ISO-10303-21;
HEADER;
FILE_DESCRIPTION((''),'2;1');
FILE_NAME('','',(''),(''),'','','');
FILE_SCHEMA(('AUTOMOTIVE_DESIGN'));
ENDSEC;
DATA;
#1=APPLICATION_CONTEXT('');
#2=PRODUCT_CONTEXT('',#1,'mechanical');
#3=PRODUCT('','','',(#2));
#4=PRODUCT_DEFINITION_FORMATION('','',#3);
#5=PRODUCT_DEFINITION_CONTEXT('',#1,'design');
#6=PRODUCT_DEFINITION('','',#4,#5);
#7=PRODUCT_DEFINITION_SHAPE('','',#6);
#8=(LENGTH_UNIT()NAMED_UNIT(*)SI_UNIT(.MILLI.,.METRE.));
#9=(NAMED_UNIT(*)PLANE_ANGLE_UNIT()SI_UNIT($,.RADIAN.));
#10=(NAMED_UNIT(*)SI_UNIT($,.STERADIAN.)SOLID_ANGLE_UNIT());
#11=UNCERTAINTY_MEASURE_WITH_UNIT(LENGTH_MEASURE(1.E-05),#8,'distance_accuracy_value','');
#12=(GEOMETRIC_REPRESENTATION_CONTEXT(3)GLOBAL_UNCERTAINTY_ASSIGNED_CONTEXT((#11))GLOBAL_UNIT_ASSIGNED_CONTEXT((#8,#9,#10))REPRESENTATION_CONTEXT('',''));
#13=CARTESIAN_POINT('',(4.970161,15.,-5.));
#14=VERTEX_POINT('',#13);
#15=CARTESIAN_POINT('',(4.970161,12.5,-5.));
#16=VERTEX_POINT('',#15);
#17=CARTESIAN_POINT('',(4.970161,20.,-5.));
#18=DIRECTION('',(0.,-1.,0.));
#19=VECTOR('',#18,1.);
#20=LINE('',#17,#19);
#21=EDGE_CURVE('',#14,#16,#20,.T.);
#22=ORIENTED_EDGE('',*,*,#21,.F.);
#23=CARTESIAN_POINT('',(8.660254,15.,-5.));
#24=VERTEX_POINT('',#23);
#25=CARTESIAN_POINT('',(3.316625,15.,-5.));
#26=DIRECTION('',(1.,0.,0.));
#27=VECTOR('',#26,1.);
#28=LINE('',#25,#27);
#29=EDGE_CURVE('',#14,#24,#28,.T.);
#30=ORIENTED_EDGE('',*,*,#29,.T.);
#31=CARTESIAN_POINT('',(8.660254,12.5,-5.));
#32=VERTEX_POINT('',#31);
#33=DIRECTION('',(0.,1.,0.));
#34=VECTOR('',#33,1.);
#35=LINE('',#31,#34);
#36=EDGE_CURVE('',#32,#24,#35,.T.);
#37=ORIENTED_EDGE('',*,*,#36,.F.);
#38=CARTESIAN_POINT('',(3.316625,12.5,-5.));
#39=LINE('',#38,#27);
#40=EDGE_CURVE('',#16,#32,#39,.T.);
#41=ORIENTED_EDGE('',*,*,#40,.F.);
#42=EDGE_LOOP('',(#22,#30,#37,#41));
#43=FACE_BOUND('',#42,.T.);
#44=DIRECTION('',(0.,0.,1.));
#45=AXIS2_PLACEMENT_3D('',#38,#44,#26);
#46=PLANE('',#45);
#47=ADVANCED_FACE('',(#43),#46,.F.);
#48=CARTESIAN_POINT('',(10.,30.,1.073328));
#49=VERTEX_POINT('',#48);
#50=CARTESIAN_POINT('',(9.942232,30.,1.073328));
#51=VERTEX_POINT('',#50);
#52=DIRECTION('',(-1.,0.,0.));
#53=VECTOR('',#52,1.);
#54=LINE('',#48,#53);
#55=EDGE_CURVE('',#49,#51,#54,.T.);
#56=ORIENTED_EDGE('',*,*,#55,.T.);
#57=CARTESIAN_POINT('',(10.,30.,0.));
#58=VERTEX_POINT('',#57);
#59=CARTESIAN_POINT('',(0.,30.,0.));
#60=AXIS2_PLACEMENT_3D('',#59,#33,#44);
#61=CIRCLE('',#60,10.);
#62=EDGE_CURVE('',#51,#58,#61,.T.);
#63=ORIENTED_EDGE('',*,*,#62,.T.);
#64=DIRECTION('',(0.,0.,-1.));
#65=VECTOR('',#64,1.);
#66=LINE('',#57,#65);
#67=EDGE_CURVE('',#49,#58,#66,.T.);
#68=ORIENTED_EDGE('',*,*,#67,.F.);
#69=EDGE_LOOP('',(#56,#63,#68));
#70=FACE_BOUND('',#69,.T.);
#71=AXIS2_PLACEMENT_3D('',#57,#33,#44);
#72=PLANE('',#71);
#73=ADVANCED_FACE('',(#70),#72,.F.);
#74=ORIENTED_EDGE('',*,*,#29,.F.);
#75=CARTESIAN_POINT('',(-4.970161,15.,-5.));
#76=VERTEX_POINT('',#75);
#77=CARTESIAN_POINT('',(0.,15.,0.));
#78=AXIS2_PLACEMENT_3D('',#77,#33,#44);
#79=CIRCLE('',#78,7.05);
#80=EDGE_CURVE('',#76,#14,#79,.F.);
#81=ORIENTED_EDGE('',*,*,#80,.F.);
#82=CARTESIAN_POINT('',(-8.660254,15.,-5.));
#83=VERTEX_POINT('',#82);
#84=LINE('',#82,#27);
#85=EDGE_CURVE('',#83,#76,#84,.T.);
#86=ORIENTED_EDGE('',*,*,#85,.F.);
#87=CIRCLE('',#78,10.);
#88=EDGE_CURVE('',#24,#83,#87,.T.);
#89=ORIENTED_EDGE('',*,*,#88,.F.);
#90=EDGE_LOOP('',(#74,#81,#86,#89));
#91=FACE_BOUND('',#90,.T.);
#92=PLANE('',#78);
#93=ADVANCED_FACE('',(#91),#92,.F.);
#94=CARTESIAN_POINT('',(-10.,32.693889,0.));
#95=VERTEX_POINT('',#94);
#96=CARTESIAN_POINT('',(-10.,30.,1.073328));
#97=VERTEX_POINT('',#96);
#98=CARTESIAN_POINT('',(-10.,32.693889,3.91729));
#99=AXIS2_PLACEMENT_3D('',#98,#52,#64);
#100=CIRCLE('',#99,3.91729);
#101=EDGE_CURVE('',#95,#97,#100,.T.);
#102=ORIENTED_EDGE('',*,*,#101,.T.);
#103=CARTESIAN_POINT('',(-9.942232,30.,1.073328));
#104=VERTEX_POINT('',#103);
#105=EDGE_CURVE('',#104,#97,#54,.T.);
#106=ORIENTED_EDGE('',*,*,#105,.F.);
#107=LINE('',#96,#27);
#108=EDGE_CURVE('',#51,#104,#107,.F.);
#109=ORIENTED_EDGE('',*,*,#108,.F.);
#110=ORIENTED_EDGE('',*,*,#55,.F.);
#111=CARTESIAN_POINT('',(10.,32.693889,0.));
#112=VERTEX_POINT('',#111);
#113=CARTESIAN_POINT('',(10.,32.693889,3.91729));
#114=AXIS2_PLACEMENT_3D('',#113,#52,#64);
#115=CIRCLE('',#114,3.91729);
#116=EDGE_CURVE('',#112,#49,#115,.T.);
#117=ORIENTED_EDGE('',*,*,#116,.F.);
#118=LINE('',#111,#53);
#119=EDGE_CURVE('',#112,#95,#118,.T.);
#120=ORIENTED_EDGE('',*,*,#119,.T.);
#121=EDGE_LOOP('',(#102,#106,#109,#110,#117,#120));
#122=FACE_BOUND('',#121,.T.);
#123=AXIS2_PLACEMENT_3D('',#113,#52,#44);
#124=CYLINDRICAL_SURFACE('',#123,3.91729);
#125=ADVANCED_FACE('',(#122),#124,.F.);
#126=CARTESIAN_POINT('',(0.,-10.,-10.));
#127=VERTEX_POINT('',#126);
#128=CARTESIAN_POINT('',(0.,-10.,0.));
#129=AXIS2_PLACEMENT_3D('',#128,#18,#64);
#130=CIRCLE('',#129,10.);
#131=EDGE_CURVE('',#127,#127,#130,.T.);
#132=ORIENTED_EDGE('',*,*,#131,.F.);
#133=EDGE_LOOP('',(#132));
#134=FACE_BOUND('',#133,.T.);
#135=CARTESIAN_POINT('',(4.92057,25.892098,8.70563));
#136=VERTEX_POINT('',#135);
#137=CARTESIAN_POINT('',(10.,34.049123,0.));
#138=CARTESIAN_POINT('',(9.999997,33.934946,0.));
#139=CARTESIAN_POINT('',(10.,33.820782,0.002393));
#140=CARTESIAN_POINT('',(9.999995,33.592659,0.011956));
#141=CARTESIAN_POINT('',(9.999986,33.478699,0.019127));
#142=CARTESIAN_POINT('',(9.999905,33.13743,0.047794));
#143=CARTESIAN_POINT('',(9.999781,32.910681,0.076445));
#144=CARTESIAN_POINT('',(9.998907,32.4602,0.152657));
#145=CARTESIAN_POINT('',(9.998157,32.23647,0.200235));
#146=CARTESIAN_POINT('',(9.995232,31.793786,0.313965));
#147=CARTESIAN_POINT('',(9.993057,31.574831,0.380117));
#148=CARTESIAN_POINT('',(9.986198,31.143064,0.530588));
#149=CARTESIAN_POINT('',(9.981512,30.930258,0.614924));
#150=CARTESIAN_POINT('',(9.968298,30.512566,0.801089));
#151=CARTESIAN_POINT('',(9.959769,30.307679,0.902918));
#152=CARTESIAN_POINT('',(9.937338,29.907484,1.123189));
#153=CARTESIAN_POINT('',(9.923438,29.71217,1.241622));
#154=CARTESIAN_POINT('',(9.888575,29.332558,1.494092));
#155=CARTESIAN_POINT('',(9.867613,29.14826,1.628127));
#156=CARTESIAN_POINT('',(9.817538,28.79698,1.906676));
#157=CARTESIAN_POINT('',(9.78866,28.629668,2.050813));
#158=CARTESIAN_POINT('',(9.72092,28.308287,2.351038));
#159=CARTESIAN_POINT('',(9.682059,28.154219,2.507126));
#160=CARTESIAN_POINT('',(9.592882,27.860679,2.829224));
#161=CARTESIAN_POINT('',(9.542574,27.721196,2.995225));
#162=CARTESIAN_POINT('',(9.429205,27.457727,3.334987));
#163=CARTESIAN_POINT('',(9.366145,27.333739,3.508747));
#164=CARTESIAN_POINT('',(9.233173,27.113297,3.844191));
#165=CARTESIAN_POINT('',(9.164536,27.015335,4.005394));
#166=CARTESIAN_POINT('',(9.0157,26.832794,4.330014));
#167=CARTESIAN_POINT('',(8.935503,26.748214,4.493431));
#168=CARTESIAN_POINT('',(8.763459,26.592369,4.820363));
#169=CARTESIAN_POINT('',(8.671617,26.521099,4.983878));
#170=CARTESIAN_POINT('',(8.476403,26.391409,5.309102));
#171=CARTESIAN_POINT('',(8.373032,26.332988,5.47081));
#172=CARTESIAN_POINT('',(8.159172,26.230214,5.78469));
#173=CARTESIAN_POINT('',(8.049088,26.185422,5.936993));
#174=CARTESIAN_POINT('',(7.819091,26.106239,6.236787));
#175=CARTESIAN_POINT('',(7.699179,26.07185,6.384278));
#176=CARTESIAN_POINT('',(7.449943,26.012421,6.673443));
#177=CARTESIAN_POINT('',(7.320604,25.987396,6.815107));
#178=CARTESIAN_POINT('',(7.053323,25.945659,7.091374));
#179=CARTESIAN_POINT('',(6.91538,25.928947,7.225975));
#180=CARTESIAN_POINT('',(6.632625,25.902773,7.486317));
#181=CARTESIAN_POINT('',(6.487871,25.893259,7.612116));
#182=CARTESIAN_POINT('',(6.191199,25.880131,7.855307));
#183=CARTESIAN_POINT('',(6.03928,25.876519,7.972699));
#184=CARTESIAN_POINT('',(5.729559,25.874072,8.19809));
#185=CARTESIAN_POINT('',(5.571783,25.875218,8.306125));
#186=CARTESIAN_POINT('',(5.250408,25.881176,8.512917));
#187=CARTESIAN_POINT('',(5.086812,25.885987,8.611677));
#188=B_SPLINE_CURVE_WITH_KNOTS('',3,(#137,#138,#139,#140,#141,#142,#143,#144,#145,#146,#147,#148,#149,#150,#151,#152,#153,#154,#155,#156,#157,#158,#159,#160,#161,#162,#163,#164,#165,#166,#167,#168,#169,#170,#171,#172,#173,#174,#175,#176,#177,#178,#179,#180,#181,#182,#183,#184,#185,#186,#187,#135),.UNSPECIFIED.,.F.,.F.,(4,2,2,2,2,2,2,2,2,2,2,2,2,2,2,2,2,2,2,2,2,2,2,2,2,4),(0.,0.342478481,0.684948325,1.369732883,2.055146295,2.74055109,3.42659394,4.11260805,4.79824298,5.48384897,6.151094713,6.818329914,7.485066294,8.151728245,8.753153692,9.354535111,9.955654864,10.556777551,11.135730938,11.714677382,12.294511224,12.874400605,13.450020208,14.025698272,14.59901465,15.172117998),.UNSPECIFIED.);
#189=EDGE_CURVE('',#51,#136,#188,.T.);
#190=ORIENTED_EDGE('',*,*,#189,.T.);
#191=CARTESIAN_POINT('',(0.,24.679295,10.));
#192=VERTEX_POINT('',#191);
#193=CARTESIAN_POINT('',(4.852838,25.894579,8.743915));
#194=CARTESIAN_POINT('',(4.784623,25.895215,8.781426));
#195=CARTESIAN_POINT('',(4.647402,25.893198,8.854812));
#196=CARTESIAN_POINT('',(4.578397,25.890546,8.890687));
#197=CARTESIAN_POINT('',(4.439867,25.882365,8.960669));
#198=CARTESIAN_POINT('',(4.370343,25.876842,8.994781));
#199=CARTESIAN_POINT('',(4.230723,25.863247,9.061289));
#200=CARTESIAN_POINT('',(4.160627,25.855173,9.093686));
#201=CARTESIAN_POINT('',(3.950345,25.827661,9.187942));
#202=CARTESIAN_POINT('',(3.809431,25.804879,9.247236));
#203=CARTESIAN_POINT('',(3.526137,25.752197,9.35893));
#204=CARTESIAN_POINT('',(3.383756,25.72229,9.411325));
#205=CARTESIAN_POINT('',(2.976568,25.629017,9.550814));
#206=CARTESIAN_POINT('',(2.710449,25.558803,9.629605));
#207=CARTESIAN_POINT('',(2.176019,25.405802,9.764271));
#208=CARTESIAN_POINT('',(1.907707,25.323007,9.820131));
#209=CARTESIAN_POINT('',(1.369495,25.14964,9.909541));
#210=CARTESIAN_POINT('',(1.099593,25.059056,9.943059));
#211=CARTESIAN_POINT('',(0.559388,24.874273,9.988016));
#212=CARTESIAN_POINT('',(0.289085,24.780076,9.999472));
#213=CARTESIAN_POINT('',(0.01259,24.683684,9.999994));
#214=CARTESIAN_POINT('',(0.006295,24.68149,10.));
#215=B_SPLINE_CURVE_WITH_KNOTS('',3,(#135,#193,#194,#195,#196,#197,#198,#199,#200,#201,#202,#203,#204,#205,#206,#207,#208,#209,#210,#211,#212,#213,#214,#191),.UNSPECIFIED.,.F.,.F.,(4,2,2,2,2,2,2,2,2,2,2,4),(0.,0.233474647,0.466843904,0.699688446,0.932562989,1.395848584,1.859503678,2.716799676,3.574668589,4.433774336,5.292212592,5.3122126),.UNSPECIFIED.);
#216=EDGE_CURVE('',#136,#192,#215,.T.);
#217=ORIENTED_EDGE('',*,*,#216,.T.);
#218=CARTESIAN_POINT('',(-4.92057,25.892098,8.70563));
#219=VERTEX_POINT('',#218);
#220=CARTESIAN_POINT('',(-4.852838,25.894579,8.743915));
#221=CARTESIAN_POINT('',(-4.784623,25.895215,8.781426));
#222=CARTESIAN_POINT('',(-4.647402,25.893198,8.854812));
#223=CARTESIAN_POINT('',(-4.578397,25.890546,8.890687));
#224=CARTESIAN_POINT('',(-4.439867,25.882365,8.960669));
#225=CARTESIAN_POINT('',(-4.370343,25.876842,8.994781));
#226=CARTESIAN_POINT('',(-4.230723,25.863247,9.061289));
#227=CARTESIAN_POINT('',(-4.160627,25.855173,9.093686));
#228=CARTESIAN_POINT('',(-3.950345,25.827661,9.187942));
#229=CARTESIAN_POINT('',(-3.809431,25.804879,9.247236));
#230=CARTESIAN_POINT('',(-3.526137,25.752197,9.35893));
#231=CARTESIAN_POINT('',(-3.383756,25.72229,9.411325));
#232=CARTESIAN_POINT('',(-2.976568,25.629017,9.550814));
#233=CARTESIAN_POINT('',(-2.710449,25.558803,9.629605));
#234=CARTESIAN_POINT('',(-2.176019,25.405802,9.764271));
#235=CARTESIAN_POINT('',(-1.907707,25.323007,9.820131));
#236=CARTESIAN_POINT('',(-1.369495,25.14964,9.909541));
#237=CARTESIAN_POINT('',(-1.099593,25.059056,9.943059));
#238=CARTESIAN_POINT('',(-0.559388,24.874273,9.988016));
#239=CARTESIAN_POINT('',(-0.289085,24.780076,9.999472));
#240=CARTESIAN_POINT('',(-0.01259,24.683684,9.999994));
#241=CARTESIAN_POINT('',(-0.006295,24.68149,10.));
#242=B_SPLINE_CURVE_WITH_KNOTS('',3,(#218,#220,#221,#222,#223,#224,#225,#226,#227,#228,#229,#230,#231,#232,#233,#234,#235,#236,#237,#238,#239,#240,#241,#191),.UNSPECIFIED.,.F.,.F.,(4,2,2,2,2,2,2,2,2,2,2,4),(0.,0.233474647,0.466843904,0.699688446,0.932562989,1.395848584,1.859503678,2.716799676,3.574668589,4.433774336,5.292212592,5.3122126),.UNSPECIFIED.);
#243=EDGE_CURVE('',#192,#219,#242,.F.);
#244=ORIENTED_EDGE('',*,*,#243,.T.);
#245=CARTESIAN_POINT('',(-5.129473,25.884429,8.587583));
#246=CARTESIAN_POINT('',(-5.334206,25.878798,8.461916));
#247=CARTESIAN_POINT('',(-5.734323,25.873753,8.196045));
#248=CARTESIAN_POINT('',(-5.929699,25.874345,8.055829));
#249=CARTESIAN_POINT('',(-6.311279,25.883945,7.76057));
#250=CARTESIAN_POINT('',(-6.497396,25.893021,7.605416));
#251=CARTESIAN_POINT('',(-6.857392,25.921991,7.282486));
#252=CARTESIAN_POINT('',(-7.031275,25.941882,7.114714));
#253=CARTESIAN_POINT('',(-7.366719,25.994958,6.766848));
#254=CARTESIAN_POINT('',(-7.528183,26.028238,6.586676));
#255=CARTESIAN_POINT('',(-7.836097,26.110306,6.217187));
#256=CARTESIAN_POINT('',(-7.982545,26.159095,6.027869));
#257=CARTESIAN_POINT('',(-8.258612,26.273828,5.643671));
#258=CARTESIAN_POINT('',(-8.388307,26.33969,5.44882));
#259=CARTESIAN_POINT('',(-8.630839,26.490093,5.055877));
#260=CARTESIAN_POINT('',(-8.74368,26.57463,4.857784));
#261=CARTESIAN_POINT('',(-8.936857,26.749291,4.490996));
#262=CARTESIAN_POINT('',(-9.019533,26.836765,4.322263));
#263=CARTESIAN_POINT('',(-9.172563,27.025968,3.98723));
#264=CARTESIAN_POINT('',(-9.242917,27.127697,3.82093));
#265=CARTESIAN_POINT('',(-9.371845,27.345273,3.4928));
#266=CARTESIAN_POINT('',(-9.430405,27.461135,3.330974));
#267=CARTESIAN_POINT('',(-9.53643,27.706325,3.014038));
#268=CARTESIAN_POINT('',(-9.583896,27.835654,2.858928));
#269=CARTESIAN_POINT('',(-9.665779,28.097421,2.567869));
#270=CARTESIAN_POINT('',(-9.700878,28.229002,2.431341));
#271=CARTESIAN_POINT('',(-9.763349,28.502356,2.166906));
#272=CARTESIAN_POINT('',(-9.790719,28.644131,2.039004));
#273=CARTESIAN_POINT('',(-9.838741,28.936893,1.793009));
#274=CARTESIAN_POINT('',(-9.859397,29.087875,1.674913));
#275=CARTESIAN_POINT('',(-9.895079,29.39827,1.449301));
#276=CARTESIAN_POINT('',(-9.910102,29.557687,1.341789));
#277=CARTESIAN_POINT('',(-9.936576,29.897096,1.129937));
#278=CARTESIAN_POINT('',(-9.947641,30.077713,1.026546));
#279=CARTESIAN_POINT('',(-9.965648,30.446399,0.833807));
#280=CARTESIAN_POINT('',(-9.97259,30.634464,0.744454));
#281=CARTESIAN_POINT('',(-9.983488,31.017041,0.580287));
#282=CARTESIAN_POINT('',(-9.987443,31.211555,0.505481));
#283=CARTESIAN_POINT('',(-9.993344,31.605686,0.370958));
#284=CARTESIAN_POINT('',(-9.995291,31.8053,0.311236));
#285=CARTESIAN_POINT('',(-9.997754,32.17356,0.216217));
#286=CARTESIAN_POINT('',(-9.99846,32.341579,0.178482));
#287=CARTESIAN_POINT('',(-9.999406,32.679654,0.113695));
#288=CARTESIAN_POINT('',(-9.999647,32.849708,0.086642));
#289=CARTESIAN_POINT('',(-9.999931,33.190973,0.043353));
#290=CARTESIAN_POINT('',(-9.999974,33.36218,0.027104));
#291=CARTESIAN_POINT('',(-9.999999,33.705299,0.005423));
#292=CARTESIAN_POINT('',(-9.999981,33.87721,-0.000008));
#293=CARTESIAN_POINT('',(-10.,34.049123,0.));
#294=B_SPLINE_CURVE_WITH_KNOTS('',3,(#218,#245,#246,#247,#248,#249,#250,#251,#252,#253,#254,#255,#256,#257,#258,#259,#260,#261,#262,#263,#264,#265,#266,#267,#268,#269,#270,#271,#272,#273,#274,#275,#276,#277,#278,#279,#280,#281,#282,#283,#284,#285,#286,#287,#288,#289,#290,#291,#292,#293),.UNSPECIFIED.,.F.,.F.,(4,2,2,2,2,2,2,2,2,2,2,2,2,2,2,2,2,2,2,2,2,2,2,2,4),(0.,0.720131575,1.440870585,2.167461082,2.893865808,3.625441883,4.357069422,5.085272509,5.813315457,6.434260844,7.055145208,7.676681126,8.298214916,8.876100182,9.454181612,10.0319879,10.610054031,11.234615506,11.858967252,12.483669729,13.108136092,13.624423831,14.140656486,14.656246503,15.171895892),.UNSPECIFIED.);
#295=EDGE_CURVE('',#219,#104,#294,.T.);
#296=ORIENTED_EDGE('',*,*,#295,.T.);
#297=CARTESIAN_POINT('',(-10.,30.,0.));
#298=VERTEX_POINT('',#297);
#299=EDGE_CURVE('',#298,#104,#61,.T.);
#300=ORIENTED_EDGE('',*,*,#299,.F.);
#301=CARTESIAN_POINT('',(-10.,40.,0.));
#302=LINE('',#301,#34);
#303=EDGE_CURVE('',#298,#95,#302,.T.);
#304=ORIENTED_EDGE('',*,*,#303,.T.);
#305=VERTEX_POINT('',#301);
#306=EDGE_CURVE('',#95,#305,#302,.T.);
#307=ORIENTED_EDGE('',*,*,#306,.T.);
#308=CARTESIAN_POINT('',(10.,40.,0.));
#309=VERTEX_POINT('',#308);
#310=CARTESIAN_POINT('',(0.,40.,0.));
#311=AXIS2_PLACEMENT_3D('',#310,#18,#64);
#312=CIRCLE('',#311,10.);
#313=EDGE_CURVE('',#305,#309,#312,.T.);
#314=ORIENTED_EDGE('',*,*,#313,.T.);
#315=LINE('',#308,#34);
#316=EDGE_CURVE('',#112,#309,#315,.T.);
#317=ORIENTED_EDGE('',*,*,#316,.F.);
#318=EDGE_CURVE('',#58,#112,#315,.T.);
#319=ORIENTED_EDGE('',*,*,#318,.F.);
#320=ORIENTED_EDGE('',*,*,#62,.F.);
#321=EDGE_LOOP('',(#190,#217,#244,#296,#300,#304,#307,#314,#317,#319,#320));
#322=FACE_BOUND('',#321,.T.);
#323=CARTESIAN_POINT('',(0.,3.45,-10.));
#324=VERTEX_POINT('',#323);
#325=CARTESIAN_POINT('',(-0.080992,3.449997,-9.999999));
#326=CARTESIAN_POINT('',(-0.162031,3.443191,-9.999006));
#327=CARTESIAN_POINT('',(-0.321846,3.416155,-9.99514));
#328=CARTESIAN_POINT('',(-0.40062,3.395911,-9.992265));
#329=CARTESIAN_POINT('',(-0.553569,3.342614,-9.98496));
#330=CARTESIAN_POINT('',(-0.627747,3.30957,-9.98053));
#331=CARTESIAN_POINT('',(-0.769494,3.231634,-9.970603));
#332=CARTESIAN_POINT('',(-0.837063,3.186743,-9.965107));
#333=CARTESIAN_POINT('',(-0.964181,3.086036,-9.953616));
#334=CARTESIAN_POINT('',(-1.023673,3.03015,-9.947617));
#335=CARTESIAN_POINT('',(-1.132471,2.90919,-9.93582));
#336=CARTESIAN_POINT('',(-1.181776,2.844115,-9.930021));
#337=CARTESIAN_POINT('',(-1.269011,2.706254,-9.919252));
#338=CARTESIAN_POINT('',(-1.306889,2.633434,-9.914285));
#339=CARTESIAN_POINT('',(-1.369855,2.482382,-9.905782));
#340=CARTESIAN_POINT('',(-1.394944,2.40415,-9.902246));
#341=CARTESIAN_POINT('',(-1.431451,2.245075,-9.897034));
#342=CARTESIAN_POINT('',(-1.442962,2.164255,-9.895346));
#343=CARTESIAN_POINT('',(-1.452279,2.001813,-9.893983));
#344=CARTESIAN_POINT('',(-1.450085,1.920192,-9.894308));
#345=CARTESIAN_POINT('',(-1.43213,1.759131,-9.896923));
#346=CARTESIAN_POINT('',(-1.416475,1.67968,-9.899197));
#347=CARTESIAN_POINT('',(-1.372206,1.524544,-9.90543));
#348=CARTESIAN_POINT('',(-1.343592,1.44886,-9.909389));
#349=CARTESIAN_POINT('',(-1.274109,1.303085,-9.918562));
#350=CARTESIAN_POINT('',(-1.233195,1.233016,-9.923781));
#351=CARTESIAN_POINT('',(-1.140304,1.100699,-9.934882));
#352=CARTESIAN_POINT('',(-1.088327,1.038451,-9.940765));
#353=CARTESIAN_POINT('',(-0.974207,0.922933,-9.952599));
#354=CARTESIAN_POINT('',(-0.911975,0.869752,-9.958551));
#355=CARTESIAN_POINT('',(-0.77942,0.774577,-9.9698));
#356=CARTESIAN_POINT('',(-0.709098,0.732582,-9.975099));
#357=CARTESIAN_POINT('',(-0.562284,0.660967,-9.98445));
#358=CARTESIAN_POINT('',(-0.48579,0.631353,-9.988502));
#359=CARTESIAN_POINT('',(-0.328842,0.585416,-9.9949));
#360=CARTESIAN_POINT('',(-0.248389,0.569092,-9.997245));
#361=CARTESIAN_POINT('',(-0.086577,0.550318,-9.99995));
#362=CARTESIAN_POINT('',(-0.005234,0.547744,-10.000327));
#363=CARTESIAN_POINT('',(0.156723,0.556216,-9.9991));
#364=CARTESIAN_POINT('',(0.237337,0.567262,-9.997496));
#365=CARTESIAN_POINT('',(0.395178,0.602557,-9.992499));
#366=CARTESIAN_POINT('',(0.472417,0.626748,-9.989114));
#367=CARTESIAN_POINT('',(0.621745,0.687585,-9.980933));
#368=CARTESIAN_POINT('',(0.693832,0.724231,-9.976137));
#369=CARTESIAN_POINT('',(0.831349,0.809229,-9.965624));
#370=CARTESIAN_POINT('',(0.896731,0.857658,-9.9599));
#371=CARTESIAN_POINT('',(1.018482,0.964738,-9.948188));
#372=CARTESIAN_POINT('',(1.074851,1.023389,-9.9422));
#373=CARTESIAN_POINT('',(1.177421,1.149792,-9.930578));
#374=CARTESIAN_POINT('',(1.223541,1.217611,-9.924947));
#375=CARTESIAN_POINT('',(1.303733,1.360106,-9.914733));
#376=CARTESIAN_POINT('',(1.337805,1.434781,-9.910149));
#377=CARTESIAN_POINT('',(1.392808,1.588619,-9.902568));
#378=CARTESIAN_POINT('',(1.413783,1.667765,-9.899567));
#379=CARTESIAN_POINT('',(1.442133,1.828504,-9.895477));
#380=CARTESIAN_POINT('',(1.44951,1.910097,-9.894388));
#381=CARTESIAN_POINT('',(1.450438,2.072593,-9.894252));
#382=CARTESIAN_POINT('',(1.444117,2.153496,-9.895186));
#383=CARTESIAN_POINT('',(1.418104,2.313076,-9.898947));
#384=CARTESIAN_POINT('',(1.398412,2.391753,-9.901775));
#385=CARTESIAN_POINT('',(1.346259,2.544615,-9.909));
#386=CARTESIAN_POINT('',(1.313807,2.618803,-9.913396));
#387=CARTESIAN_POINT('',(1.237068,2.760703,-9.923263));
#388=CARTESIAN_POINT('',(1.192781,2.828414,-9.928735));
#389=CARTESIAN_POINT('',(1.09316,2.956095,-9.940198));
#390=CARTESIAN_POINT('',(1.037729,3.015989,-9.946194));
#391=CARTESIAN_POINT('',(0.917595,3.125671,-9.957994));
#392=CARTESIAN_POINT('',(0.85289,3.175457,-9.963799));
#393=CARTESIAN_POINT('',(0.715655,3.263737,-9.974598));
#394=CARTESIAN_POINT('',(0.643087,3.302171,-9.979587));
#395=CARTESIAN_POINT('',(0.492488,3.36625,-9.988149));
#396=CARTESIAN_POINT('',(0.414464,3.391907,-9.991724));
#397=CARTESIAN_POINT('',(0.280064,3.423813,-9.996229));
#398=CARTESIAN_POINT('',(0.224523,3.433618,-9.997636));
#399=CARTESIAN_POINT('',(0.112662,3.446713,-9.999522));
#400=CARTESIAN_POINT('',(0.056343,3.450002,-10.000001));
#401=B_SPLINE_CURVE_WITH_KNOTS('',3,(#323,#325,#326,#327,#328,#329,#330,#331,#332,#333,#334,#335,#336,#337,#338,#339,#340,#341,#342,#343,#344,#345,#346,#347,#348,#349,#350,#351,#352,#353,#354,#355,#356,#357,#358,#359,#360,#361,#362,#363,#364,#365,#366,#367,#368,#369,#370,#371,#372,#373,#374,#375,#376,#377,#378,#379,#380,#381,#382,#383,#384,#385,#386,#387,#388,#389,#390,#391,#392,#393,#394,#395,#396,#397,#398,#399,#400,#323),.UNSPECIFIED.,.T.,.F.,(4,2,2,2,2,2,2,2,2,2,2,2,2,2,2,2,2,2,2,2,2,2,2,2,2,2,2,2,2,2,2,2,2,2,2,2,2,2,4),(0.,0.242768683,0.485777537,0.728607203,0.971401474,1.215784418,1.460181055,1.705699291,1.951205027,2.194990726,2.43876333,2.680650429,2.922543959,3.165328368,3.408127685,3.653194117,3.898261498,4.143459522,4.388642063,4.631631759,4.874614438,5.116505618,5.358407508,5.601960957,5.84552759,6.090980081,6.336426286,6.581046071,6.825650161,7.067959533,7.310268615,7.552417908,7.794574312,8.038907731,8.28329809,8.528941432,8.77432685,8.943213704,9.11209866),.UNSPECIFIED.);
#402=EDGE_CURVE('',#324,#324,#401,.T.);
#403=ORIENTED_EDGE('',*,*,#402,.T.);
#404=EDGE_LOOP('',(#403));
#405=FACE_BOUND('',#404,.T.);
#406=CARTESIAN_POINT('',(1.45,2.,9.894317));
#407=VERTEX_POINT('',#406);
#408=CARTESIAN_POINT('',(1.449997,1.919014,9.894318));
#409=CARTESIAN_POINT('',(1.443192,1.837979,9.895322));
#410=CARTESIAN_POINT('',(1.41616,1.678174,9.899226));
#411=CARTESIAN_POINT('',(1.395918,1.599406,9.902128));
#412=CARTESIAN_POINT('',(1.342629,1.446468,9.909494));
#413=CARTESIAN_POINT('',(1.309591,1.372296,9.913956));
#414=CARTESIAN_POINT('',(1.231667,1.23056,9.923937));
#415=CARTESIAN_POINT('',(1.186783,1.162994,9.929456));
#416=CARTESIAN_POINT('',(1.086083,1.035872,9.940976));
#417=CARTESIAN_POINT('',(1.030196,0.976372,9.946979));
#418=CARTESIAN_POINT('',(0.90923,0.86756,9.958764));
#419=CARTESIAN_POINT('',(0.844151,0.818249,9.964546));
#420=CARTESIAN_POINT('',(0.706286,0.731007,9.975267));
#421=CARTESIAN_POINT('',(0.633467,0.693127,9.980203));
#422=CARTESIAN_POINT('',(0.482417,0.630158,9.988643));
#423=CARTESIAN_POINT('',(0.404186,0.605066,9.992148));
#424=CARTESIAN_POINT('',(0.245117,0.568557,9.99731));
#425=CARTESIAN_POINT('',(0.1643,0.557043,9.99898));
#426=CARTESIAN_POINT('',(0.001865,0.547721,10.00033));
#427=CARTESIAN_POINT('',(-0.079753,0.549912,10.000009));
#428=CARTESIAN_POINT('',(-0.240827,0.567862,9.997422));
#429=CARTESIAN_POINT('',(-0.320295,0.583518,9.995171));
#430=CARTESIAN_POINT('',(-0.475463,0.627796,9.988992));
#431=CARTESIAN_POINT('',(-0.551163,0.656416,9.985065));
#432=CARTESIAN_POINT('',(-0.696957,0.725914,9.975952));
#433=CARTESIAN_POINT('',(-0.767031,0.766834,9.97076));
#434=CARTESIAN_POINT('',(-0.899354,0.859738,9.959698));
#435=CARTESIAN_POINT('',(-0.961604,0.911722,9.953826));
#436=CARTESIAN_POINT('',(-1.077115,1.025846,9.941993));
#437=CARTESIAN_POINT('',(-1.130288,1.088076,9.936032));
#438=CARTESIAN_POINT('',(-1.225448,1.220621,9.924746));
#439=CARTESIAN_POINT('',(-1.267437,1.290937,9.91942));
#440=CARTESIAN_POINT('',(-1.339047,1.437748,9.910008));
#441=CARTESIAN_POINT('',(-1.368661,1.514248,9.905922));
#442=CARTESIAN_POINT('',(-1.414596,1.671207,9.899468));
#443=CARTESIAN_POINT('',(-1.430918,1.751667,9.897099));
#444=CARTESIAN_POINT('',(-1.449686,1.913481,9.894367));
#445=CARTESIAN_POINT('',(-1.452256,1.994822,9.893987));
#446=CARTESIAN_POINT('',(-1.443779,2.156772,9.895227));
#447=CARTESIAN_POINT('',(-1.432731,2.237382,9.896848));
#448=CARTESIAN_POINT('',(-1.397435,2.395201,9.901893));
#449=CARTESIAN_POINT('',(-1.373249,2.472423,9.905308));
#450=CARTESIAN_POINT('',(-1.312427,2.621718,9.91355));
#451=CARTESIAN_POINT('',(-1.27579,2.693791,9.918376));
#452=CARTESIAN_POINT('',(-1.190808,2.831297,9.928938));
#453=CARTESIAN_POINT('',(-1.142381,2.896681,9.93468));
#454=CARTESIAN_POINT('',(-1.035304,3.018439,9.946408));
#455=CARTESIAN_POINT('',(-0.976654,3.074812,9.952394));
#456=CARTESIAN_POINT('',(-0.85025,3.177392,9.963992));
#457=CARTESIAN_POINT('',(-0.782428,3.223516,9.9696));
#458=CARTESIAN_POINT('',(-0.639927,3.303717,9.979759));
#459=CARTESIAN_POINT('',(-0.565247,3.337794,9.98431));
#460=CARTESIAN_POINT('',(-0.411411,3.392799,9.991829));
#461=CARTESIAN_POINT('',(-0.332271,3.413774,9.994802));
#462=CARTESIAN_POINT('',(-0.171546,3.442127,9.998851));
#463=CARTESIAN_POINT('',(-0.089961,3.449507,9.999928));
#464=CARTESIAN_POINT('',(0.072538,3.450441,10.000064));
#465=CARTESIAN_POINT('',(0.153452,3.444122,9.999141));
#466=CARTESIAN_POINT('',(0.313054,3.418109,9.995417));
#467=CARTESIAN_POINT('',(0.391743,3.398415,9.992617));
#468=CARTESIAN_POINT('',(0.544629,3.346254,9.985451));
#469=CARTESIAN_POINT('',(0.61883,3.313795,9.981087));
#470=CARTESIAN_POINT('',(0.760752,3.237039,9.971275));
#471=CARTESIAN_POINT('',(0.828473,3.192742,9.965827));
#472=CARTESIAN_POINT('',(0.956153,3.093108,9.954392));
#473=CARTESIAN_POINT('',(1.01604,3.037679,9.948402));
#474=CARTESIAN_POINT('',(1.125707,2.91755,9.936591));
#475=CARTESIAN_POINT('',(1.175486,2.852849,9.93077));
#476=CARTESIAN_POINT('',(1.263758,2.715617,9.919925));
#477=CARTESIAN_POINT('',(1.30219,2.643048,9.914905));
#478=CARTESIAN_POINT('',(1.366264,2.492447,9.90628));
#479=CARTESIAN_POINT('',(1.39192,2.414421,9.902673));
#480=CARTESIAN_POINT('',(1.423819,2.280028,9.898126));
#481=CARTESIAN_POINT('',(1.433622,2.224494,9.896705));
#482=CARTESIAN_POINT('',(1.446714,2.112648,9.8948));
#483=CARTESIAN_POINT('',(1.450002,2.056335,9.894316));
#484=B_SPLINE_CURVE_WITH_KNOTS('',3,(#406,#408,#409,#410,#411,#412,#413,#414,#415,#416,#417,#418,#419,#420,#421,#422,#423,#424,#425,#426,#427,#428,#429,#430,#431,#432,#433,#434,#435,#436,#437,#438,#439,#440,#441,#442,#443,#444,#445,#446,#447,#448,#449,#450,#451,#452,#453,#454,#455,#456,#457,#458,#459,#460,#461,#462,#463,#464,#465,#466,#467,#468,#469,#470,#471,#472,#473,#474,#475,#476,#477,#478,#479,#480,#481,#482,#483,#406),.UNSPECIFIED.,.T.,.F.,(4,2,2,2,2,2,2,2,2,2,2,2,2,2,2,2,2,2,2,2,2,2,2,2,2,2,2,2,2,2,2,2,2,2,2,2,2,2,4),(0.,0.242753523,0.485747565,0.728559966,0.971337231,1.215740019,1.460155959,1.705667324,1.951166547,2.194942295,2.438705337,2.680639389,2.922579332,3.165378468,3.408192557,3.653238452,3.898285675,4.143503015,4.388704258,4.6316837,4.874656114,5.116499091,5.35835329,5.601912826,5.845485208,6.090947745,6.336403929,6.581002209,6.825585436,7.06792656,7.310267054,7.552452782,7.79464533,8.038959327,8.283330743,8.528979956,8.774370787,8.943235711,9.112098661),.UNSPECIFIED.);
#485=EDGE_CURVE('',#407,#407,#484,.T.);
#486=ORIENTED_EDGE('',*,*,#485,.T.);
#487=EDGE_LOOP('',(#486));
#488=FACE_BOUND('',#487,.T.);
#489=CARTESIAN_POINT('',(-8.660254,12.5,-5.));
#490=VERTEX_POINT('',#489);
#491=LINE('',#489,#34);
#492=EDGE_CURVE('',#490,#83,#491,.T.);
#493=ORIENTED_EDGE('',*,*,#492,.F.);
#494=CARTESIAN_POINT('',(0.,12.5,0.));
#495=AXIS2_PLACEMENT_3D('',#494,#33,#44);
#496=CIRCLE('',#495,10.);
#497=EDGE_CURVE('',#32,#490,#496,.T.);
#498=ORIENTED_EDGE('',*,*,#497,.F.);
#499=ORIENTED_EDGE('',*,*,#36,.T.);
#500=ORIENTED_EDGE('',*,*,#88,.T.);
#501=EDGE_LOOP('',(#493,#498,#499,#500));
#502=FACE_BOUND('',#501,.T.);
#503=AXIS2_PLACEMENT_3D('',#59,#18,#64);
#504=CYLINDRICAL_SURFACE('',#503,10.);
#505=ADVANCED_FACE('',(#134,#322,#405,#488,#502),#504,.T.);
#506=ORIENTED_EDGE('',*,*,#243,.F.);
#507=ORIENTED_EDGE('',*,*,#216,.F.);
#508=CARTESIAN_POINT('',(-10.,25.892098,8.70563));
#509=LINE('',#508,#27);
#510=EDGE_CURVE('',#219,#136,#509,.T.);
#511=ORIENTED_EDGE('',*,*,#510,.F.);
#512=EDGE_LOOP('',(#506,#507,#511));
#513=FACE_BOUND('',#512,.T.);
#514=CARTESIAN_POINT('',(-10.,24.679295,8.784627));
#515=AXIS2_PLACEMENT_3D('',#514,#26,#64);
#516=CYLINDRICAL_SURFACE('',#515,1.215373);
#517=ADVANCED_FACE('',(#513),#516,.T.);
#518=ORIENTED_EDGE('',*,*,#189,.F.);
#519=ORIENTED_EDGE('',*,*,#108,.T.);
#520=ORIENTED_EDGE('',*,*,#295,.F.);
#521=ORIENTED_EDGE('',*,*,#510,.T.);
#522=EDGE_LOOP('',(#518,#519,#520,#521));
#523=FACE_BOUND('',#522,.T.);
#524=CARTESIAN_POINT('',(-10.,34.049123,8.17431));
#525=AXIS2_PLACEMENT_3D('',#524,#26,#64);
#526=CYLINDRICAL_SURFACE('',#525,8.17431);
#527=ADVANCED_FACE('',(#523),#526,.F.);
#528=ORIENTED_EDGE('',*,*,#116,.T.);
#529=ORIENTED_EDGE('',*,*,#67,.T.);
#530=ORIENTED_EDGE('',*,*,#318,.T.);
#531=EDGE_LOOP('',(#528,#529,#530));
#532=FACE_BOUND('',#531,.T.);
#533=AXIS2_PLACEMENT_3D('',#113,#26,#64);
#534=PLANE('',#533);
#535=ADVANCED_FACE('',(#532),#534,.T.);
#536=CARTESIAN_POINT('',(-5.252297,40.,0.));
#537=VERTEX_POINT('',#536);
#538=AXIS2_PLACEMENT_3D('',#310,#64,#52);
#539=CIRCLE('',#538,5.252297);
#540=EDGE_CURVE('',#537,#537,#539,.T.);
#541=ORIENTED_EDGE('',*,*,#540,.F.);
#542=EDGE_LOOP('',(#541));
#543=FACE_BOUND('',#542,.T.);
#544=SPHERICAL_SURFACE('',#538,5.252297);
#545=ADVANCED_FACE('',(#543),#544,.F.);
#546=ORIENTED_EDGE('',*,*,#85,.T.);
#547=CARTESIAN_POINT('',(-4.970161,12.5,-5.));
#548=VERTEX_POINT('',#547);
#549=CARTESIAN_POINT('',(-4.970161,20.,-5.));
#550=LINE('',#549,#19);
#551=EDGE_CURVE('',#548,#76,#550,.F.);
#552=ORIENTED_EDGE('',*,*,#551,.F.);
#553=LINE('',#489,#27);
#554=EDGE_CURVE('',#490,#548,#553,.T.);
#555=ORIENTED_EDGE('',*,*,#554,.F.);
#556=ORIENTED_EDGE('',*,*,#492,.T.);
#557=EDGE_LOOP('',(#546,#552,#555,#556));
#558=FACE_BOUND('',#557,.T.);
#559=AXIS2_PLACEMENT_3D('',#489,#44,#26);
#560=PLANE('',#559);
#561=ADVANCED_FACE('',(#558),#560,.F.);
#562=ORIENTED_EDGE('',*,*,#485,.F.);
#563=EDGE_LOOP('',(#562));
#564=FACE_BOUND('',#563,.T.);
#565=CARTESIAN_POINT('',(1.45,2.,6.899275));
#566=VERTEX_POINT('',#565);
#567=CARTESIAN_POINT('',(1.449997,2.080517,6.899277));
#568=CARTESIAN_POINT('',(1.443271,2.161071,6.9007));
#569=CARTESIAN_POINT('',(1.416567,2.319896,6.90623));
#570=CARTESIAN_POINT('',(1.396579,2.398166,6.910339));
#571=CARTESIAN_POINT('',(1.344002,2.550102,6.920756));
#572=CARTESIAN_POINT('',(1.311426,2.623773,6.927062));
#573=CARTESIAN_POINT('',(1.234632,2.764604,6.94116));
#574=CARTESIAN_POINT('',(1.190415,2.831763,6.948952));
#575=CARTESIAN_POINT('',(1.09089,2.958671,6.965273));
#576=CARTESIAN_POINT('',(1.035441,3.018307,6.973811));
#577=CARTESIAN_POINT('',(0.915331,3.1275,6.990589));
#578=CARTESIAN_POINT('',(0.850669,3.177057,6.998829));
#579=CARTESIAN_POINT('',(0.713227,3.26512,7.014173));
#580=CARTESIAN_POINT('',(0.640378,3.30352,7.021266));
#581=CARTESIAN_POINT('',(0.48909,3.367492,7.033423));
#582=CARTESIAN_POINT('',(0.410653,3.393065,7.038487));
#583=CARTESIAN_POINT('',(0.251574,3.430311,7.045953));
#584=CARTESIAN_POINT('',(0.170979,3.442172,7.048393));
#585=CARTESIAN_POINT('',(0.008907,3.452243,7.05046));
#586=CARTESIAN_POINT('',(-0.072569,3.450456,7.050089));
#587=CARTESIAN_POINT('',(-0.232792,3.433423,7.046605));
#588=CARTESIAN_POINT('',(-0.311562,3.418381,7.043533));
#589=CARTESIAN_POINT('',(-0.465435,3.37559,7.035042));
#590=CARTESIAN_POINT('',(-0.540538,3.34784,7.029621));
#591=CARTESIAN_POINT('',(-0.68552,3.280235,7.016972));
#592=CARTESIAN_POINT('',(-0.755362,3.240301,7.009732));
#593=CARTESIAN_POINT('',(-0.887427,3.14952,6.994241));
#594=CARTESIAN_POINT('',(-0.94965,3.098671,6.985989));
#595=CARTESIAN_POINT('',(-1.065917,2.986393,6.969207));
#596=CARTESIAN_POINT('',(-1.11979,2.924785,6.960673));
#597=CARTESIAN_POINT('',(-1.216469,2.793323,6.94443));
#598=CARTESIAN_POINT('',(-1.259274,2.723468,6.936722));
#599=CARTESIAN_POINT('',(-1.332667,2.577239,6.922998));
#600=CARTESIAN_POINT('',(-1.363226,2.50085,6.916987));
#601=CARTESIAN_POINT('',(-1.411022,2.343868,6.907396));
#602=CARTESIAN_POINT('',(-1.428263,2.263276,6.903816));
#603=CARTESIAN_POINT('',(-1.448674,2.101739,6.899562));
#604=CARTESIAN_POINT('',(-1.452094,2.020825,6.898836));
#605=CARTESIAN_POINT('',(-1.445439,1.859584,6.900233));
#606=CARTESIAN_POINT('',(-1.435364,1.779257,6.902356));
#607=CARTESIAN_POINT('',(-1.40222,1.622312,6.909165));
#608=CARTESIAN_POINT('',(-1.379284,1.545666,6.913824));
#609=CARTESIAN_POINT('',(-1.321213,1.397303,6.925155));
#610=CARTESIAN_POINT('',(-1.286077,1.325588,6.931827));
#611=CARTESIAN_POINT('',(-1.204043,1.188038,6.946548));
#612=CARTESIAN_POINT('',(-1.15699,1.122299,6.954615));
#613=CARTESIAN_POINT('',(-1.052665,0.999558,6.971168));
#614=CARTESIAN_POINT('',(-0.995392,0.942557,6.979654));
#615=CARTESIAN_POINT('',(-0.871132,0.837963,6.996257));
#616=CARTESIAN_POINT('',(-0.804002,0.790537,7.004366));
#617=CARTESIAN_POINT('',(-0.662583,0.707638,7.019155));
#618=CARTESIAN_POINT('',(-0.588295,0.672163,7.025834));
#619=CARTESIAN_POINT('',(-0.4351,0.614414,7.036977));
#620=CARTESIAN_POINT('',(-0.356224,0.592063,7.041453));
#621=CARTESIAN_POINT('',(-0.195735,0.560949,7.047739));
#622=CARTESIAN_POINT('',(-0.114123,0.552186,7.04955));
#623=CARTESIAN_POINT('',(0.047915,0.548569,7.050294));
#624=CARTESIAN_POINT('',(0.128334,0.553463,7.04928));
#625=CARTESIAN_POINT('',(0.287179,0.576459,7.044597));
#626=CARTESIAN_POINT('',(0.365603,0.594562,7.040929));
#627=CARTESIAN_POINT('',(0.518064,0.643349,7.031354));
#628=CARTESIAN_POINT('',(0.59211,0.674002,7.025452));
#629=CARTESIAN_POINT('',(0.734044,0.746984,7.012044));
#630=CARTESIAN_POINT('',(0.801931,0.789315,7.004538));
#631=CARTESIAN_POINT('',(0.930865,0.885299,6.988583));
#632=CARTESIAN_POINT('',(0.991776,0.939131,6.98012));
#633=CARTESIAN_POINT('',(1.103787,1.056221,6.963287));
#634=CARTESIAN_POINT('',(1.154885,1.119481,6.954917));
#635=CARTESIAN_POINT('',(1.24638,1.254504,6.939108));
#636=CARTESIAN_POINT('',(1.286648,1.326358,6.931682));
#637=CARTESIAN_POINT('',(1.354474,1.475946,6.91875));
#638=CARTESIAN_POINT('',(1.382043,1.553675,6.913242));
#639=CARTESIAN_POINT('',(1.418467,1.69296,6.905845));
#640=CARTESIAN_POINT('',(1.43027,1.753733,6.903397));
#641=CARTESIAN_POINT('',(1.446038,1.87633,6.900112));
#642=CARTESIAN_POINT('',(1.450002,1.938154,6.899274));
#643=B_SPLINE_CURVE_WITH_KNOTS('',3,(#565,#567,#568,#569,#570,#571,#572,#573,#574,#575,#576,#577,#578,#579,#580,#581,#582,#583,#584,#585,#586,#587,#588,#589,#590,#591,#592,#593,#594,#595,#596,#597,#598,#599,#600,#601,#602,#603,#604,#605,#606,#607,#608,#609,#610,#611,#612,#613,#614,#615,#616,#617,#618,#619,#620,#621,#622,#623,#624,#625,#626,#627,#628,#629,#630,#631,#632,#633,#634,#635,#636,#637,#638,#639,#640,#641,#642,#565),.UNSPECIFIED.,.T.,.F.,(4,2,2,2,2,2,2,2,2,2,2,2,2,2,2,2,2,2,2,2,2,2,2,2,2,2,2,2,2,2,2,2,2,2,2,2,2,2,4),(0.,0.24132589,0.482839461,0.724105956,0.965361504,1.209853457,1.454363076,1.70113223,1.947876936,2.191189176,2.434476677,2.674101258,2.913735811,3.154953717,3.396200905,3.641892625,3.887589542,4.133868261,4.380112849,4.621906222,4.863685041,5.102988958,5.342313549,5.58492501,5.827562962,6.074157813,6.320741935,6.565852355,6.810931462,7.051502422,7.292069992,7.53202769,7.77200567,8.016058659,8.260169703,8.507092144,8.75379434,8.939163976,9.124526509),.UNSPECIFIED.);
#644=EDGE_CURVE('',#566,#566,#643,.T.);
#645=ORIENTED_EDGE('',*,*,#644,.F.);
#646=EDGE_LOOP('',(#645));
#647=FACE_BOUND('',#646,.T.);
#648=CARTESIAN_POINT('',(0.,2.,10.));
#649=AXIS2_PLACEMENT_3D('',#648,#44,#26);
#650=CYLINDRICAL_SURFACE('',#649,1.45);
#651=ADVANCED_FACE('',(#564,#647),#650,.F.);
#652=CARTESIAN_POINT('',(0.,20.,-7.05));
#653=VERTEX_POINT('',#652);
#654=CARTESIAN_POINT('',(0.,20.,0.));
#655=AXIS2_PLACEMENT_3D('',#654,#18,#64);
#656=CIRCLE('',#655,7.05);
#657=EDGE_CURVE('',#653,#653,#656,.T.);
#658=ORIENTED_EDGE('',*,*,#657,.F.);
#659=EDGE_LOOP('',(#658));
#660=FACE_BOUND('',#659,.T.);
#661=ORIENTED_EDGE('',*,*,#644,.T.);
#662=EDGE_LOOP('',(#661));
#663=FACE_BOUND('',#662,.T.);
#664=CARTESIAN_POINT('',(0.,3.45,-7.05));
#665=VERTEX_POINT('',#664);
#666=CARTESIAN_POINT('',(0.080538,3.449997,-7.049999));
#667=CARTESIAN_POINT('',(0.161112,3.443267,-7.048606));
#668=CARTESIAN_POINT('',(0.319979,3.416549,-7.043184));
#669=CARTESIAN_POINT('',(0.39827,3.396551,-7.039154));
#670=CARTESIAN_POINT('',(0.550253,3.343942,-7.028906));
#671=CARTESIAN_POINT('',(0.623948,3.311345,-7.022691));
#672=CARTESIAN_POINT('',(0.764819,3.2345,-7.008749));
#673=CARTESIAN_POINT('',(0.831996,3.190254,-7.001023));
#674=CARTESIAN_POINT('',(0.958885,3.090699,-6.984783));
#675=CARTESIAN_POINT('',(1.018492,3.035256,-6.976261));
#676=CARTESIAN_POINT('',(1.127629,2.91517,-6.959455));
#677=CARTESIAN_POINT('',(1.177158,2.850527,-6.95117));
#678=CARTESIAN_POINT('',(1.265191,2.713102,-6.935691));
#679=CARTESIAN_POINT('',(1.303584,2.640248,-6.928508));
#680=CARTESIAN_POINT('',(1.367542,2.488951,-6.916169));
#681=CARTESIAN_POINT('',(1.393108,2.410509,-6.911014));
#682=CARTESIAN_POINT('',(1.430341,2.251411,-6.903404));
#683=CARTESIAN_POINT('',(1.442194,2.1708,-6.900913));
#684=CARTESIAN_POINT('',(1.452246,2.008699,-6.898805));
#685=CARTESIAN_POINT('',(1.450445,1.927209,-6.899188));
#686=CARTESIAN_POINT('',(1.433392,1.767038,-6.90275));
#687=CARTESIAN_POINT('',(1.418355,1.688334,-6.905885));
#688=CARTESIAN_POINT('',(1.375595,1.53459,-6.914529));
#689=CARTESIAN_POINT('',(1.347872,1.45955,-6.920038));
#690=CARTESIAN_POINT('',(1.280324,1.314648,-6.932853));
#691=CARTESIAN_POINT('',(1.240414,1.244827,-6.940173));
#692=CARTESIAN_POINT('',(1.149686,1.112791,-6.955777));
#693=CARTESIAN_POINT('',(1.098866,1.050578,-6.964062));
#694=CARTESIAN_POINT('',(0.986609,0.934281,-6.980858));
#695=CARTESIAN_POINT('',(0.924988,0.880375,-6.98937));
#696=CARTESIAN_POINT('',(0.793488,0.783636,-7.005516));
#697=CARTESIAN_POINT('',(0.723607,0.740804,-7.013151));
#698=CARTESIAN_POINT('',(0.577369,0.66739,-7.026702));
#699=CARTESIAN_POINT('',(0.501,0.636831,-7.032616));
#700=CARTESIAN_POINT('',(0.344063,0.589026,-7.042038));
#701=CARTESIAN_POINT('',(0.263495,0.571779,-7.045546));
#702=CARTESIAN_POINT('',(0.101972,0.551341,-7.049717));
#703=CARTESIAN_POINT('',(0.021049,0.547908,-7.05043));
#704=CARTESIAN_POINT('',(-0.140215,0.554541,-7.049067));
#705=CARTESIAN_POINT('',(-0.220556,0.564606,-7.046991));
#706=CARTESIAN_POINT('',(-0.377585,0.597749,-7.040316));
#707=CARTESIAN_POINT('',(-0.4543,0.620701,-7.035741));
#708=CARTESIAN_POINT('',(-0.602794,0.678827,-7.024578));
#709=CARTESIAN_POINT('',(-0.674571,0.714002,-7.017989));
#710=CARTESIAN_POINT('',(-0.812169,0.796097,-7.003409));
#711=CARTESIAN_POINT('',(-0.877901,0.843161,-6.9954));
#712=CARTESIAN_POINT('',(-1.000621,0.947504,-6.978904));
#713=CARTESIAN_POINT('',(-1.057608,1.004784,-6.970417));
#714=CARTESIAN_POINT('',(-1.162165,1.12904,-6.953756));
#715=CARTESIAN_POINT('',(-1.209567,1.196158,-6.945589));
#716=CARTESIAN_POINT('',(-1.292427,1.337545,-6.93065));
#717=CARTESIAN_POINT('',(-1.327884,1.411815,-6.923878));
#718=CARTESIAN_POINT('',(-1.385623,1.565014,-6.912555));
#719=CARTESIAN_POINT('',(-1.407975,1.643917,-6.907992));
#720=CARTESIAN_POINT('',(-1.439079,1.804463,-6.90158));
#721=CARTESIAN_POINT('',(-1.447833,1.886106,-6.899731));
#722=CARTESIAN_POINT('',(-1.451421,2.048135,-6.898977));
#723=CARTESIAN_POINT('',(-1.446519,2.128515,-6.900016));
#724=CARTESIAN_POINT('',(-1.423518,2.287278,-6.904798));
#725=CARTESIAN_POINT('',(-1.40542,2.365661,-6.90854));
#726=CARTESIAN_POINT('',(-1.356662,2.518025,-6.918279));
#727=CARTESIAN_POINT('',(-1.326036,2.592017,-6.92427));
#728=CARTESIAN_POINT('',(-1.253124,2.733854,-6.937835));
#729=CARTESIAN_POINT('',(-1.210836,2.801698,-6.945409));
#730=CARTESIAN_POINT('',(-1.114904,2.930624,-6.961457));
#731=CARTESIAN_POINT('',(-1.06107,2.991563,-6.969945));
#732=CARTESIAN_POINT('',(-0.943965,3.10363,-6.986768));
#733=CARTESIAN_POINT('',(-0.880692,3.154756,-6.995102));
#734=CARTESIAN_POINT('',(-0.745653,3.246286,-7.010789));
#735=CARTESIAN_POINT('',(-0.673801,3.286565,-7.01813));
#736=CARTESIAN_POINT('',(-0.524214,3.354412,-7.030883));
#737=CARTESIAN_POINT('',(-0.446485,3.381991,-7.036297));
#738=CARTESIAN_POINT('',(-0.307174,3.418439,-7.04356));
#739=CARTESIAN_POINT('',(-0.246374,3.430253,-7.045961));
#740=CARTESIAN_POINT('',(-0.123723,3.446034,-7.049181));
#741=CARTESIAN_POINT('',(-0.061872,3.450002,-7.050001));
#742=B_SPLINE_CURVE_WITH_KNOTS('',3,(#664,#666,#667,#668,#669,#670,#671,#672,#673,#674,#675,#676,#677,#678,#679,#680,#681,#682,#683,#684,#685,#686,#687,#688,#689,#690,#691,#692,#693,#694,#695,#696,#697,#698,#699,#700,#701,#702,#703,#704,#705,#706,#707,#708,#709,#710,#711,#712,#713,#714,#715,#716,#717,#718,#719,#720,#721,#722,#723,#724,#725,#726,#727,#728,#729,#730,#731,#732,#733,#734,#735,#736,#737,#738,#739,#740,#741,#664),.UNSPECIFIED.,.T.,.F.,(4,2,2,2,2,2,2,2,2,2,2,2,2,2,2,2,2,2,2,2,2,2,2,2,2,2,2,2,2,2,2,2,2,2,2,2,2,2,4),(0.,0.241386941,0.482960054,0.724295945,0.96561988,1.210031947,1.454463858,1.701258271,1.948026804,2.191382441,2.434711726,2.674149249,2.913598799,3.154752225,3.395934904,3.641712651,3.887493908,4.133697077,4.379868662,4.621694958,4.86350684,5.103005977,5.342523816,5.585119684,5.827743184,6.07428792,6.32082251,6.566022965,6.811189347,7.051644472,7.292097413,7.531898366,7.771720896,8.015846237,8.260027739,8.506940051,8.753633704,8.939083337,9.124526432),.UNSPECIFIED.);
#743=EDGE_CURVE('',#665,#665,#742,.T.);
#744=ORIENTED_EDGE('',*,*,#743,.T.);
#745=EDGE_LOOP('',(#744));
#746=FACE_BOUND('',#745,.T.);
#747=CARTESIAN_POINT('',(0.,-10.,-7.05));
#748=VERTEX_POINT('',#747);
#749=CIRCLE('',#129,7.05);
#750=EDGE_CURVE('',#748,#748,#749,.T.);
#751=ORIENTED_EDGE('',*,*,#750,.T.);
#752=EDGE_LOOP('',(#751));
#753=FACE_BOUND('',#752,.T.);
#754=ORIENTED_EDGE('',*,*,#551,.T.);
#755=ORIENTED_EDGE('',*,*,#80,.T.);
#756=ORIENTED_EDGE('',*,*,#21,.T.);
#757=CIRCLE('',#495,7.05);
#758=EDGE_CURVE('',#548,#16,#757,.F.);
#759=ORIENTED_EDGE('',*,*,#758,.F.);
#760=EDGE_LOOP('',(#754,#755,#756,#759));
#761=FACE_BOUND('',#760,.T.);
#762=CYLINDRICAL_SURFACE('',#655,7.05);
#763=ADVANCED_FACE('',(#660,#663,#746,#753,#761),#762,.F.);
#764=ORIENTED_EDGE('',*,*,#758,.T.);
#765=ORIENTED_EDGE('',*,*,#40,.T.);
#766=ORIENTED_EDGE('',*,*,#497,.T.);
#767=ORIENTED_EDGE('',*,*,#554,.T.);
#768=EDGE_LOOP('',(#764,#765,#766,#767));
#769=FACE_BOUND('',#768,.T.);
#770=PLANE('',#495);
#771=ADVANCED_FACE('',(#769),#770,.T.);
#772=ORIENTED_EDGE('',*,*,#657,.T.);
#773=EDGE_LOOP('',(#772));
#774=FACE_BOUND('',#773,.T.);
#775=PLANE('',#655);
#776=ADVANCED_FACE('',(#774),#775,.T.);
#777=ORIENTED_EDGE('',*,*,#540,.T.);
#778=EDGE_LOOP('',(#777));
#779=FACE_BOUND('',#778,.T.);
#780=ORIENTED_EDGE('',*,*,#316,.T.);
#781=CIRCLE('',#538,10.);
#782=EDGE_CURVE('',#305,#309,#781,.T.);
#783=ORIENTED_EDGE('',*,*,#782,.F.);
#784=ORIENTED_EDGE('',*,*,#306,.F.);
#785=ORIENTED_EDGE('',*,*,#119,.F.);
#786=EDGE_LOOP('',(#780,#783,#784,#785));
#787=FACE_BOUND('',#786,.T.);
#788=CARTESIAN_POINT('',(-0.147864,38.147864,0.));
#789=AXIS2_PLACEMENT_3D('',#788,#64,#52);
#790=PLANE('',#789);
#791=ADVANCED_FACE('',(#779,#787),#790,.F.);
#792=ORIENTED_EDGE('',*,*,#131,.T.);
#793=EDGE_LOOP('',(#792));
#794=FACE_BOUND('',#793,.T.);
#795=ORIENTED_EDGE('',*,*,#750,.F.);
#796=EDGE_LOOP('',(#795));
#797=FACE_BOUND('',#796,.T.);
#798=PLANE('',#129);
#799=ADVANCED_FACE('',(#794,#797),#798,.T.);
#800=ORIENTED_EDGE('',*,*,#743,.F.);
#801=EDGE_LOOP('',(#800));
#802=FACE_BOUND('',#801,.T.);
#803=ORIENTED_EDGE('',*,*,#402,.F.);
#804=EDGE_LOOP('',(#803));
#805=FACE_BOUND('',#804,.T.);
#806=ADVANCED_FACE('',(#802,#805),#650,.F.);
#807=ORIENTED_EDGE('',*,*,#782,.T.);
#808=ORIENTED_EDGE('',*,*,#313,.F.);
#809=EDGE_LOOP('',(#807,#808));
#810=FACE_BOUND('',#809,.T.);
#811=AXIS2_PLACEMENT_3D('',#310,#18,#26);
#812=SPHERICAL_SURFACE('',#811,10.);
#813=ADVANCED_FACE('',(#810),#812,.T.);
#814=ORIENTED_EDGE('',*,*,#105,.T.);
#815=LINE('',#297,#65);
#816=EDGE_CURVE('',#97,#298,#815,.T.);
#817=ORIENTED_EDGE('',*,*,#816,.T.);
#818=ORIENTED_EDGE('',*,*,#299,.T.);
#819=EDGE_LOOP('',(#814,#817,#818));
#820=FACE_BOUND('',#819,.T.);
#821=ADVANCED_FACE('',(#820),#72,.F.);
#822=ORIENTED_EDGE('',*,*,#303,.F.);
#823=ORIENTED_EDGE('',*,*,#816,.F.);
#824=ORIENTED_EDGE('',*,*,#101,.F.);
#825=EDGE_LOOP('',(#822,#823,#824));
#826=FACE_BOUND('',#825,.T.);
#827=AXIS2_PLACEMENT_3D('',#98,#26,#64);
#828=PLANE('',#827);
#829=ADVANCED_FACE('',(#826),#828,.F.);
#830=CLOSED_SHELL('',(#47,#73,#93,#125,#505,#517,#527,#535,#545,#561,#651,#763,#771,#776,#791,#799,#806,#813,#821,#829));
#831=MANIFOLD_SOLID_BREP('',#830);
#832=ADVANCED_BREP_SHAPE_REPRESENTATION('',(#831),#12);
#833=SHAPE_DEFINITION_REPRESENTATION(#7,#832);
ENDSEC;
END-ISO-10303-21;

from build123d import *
from build123d.topology import SkipClean

# Parameters (mm, degrees)
SKETCH_1_R               = 10
EXTRUDE_1_DEPTH          = 30
SKETCH_2_R               = 7.05
CUT_EXTRUDE_1_DEPTH      = 20
REVOLVE_10_ANGLE         = 180
CUT_EXTRUDE_2_DEPTH      = 52.961524228
CUT_EXTRUDE_2_DEPTH_BACK = 52.961524228
EXTRUDE_2_DEPTH          = 10
CUT_EXTRUDE_START        = -2.5
CUT_EXTRUDE_3_DEPTH      = 2.5
EXTRUDE_START            = 10
SKETCH_11_R              = 10
SKETCH_11_R_2            = 7.05
EXTRUDE_3_DEPTH          = 10
HOLE_WIZARD_M2_5_1_D     = 2.9


# Read off the part's stored shape, not the designer's step: 회전1
with BuildPart() as part:
    # 스케치1 → 보스-돌출1 (new body)
    with BuildSketch(Plane(origin=(0, 0, 0), x_dir=(1, 0, 0), z_dir=(0, 1, 0))):
        with Locations(Location((0, 0, 0), (0, 0, 270))):
            Circle(SKETCH_1_R)
    extrude(amount=EXTRUDE_1_DEPTH)

    # 스케치2 → 컷-돌출1 (cut)
    with BuildSketch(Plane.XZ):
        with Locations(Location((0, 0, 0), (0, 0, 270))):
            Circle(SKETCH_2_R)
    extrude(amount=-CUT_EXTRUDE_1_DEPTH, mode=Mode.SUBTRACT)



with BuildPart() as body_2:
    # 회전1 outline → 회전1 (revolve)
    with BuildSketch(Plane.XZ.offset(-40)):
        with BuildLine():
            Line((0, 1e-08), (0, -10))
            ThreePointArc((0, -10), (7.071067815, -7.071067808), (10, 1e-08))
            Line((10, 1e-08), (0, 1e-08))
        make_face()
    revolve(axis=Axis((0, 40, 0), (0, 0, 1)))

    # 스케치5 → 컷-회전3 (revolve, cut)
    with BuildSketch(Plane.XY):
        with BuildLine():
            Line((0, 45.252296995), (0, 34.747703005))
            ThreePointArc((0, 34.747703005), (5.252296995, 40), (0, 45.252296995))
        make_face()
    revolve(axis=Axis((0, 0, 0), (0, 1, 0)), mode=Mode.SUBTRACT)


with BuildPart() as part_1:
    with SkipClean():  # the faces are left unmerged after this step: merging them gives an invalid solid
        add(part.part)

        add(body_2.part)  # 회전10 merges body 2
        # 스케치6 → 회전10 (revolve, symmetric)
        with BuildSketch(Plane(origin=(0, 0, 0), x_dir=(0, 0, -1), z_dir=(1, 0, 0))) as revolve_10_sk:
            with BuildLine():
                Line((0, 30), (0, 30.711529751))
                ThreePointArc((0, 30.711529751), (5.980054101, 33.531969517), (7.351370698, 40))
                Line((7.351370698, 40), (10, 40))
                Line((10, 40), (10, 30))
                Line((10, 30), (0, 30))
            make_face()
        revolve(axis=Axis((0, 0, 0), (0, 1, 0)), revolution_arc=REVOLVE_10_ANGLE / 2)
        revolve(revolve_10_sk.sketch, axis=Axis((0, 0, 0), (0, -1, 0)), revolution_arc=REVOLVE_10_ANGLE / 2)
    add(part_1.part.scale(1), mode=Mode.REPLACE)  # the faces are merged on a copy

    # 스케치7 → 컷-돌출2 (cut, two sides: drawn at the far end of the back side and taken through both)
    with BuildSketch(Plane(origin=(0, 0, 0), x_dir=(0, 0, -1), z_dir=(1, 0, 0)).offset(-CUT_EXTRUDE_2_DEPTH_BACK)):
        with BuildLine():
            Line((-10, 24.679295292), (-17.050906842, 49.125599249))
            Line((-17.050906842, 49.125599249), (0, 49.125599249))
            Line((0, 49.125599249), (0, 34.049122638))
            ThreePointArc((0, 34.049122638), (-2.58520571, 28.084119755), (-8.705629602, 25.892098007))
            ThreePointArc((-8.705629602, 25.892098007), (-9.615626451, 25.566183836), (-10, 24.679295292))
        make_face()
    extrude(amount=CUT_EXTRUDE_2_DEPTH + CUT_EXTRUDE_2_DEPTH_BACK, mode=Mode.SUBTRACT)

    # 스케치8 → 보스-돌출2 (add, symmetric)
    with BuildSketch(Plane(origin=(0, 0, 0), x_dir=(0, 0, -1), z_dir=(1, 0, 0))):
        with BuildLine():
            Line((0, 32.693889078), (0, 30))
            Line((0, 30), (-1.073327621, 30))
            ThreePointArc((-1.073327621, 30), (-0.278211386, 31.243969205), (0, 32.693889078))
        make_face()
    extrude(amount=EXTRUDE_2_DEPTH, both=True)

    # 스케치10 → 컷-돌출3 (cut)
    with BuildSketch(Plane(origin=(0, 15, 0), x_dir=(1, 0, 0), z_dir=(0, 1, 0)).offset(CUT_EXTRUDE_START)):
        with BuildLine():
            Line((-8.660254038, 5), (-3.31662479, 5))
            ThreePointArc((-3.31662479, 5), (0, 6), (3.31662479, 5))
            Line((3.31662479, 5), (8.660254038, 5))
            ThreePointArc((8.660254038, 5), (0, 10), (-8.660254038, 5))
        make_face()
    extrude(amount=CUT_EXTRUDE_3_DEPTH, mode=Mode.SUBTRACT)

    # 스케치11 → 보스-돌출3 (add)
    with BuildSketch(Plane.XZ.offset(EXTRUDE_START)):
        with Locations(Location((0, 0, 0), (0, 0, 270))):
            Circle(SKETCH_11_R)
        with Locations(Location((0, 0, 0), (0, 0, 270))):
            Circle(SKETCH_11_R_2, mode=Mode.SUBTRACT)
    extrude(amount=-EXTRUDE_3_DEPTH)

    # M2.5 여유 구멍1 (through all)
    with Locations(Plane.XY.offset(10)):
        with Locations((0, 2)):
            Hole(HOLE_WIZARD_M2_5_1_D / 2)


solid = part_1.part
